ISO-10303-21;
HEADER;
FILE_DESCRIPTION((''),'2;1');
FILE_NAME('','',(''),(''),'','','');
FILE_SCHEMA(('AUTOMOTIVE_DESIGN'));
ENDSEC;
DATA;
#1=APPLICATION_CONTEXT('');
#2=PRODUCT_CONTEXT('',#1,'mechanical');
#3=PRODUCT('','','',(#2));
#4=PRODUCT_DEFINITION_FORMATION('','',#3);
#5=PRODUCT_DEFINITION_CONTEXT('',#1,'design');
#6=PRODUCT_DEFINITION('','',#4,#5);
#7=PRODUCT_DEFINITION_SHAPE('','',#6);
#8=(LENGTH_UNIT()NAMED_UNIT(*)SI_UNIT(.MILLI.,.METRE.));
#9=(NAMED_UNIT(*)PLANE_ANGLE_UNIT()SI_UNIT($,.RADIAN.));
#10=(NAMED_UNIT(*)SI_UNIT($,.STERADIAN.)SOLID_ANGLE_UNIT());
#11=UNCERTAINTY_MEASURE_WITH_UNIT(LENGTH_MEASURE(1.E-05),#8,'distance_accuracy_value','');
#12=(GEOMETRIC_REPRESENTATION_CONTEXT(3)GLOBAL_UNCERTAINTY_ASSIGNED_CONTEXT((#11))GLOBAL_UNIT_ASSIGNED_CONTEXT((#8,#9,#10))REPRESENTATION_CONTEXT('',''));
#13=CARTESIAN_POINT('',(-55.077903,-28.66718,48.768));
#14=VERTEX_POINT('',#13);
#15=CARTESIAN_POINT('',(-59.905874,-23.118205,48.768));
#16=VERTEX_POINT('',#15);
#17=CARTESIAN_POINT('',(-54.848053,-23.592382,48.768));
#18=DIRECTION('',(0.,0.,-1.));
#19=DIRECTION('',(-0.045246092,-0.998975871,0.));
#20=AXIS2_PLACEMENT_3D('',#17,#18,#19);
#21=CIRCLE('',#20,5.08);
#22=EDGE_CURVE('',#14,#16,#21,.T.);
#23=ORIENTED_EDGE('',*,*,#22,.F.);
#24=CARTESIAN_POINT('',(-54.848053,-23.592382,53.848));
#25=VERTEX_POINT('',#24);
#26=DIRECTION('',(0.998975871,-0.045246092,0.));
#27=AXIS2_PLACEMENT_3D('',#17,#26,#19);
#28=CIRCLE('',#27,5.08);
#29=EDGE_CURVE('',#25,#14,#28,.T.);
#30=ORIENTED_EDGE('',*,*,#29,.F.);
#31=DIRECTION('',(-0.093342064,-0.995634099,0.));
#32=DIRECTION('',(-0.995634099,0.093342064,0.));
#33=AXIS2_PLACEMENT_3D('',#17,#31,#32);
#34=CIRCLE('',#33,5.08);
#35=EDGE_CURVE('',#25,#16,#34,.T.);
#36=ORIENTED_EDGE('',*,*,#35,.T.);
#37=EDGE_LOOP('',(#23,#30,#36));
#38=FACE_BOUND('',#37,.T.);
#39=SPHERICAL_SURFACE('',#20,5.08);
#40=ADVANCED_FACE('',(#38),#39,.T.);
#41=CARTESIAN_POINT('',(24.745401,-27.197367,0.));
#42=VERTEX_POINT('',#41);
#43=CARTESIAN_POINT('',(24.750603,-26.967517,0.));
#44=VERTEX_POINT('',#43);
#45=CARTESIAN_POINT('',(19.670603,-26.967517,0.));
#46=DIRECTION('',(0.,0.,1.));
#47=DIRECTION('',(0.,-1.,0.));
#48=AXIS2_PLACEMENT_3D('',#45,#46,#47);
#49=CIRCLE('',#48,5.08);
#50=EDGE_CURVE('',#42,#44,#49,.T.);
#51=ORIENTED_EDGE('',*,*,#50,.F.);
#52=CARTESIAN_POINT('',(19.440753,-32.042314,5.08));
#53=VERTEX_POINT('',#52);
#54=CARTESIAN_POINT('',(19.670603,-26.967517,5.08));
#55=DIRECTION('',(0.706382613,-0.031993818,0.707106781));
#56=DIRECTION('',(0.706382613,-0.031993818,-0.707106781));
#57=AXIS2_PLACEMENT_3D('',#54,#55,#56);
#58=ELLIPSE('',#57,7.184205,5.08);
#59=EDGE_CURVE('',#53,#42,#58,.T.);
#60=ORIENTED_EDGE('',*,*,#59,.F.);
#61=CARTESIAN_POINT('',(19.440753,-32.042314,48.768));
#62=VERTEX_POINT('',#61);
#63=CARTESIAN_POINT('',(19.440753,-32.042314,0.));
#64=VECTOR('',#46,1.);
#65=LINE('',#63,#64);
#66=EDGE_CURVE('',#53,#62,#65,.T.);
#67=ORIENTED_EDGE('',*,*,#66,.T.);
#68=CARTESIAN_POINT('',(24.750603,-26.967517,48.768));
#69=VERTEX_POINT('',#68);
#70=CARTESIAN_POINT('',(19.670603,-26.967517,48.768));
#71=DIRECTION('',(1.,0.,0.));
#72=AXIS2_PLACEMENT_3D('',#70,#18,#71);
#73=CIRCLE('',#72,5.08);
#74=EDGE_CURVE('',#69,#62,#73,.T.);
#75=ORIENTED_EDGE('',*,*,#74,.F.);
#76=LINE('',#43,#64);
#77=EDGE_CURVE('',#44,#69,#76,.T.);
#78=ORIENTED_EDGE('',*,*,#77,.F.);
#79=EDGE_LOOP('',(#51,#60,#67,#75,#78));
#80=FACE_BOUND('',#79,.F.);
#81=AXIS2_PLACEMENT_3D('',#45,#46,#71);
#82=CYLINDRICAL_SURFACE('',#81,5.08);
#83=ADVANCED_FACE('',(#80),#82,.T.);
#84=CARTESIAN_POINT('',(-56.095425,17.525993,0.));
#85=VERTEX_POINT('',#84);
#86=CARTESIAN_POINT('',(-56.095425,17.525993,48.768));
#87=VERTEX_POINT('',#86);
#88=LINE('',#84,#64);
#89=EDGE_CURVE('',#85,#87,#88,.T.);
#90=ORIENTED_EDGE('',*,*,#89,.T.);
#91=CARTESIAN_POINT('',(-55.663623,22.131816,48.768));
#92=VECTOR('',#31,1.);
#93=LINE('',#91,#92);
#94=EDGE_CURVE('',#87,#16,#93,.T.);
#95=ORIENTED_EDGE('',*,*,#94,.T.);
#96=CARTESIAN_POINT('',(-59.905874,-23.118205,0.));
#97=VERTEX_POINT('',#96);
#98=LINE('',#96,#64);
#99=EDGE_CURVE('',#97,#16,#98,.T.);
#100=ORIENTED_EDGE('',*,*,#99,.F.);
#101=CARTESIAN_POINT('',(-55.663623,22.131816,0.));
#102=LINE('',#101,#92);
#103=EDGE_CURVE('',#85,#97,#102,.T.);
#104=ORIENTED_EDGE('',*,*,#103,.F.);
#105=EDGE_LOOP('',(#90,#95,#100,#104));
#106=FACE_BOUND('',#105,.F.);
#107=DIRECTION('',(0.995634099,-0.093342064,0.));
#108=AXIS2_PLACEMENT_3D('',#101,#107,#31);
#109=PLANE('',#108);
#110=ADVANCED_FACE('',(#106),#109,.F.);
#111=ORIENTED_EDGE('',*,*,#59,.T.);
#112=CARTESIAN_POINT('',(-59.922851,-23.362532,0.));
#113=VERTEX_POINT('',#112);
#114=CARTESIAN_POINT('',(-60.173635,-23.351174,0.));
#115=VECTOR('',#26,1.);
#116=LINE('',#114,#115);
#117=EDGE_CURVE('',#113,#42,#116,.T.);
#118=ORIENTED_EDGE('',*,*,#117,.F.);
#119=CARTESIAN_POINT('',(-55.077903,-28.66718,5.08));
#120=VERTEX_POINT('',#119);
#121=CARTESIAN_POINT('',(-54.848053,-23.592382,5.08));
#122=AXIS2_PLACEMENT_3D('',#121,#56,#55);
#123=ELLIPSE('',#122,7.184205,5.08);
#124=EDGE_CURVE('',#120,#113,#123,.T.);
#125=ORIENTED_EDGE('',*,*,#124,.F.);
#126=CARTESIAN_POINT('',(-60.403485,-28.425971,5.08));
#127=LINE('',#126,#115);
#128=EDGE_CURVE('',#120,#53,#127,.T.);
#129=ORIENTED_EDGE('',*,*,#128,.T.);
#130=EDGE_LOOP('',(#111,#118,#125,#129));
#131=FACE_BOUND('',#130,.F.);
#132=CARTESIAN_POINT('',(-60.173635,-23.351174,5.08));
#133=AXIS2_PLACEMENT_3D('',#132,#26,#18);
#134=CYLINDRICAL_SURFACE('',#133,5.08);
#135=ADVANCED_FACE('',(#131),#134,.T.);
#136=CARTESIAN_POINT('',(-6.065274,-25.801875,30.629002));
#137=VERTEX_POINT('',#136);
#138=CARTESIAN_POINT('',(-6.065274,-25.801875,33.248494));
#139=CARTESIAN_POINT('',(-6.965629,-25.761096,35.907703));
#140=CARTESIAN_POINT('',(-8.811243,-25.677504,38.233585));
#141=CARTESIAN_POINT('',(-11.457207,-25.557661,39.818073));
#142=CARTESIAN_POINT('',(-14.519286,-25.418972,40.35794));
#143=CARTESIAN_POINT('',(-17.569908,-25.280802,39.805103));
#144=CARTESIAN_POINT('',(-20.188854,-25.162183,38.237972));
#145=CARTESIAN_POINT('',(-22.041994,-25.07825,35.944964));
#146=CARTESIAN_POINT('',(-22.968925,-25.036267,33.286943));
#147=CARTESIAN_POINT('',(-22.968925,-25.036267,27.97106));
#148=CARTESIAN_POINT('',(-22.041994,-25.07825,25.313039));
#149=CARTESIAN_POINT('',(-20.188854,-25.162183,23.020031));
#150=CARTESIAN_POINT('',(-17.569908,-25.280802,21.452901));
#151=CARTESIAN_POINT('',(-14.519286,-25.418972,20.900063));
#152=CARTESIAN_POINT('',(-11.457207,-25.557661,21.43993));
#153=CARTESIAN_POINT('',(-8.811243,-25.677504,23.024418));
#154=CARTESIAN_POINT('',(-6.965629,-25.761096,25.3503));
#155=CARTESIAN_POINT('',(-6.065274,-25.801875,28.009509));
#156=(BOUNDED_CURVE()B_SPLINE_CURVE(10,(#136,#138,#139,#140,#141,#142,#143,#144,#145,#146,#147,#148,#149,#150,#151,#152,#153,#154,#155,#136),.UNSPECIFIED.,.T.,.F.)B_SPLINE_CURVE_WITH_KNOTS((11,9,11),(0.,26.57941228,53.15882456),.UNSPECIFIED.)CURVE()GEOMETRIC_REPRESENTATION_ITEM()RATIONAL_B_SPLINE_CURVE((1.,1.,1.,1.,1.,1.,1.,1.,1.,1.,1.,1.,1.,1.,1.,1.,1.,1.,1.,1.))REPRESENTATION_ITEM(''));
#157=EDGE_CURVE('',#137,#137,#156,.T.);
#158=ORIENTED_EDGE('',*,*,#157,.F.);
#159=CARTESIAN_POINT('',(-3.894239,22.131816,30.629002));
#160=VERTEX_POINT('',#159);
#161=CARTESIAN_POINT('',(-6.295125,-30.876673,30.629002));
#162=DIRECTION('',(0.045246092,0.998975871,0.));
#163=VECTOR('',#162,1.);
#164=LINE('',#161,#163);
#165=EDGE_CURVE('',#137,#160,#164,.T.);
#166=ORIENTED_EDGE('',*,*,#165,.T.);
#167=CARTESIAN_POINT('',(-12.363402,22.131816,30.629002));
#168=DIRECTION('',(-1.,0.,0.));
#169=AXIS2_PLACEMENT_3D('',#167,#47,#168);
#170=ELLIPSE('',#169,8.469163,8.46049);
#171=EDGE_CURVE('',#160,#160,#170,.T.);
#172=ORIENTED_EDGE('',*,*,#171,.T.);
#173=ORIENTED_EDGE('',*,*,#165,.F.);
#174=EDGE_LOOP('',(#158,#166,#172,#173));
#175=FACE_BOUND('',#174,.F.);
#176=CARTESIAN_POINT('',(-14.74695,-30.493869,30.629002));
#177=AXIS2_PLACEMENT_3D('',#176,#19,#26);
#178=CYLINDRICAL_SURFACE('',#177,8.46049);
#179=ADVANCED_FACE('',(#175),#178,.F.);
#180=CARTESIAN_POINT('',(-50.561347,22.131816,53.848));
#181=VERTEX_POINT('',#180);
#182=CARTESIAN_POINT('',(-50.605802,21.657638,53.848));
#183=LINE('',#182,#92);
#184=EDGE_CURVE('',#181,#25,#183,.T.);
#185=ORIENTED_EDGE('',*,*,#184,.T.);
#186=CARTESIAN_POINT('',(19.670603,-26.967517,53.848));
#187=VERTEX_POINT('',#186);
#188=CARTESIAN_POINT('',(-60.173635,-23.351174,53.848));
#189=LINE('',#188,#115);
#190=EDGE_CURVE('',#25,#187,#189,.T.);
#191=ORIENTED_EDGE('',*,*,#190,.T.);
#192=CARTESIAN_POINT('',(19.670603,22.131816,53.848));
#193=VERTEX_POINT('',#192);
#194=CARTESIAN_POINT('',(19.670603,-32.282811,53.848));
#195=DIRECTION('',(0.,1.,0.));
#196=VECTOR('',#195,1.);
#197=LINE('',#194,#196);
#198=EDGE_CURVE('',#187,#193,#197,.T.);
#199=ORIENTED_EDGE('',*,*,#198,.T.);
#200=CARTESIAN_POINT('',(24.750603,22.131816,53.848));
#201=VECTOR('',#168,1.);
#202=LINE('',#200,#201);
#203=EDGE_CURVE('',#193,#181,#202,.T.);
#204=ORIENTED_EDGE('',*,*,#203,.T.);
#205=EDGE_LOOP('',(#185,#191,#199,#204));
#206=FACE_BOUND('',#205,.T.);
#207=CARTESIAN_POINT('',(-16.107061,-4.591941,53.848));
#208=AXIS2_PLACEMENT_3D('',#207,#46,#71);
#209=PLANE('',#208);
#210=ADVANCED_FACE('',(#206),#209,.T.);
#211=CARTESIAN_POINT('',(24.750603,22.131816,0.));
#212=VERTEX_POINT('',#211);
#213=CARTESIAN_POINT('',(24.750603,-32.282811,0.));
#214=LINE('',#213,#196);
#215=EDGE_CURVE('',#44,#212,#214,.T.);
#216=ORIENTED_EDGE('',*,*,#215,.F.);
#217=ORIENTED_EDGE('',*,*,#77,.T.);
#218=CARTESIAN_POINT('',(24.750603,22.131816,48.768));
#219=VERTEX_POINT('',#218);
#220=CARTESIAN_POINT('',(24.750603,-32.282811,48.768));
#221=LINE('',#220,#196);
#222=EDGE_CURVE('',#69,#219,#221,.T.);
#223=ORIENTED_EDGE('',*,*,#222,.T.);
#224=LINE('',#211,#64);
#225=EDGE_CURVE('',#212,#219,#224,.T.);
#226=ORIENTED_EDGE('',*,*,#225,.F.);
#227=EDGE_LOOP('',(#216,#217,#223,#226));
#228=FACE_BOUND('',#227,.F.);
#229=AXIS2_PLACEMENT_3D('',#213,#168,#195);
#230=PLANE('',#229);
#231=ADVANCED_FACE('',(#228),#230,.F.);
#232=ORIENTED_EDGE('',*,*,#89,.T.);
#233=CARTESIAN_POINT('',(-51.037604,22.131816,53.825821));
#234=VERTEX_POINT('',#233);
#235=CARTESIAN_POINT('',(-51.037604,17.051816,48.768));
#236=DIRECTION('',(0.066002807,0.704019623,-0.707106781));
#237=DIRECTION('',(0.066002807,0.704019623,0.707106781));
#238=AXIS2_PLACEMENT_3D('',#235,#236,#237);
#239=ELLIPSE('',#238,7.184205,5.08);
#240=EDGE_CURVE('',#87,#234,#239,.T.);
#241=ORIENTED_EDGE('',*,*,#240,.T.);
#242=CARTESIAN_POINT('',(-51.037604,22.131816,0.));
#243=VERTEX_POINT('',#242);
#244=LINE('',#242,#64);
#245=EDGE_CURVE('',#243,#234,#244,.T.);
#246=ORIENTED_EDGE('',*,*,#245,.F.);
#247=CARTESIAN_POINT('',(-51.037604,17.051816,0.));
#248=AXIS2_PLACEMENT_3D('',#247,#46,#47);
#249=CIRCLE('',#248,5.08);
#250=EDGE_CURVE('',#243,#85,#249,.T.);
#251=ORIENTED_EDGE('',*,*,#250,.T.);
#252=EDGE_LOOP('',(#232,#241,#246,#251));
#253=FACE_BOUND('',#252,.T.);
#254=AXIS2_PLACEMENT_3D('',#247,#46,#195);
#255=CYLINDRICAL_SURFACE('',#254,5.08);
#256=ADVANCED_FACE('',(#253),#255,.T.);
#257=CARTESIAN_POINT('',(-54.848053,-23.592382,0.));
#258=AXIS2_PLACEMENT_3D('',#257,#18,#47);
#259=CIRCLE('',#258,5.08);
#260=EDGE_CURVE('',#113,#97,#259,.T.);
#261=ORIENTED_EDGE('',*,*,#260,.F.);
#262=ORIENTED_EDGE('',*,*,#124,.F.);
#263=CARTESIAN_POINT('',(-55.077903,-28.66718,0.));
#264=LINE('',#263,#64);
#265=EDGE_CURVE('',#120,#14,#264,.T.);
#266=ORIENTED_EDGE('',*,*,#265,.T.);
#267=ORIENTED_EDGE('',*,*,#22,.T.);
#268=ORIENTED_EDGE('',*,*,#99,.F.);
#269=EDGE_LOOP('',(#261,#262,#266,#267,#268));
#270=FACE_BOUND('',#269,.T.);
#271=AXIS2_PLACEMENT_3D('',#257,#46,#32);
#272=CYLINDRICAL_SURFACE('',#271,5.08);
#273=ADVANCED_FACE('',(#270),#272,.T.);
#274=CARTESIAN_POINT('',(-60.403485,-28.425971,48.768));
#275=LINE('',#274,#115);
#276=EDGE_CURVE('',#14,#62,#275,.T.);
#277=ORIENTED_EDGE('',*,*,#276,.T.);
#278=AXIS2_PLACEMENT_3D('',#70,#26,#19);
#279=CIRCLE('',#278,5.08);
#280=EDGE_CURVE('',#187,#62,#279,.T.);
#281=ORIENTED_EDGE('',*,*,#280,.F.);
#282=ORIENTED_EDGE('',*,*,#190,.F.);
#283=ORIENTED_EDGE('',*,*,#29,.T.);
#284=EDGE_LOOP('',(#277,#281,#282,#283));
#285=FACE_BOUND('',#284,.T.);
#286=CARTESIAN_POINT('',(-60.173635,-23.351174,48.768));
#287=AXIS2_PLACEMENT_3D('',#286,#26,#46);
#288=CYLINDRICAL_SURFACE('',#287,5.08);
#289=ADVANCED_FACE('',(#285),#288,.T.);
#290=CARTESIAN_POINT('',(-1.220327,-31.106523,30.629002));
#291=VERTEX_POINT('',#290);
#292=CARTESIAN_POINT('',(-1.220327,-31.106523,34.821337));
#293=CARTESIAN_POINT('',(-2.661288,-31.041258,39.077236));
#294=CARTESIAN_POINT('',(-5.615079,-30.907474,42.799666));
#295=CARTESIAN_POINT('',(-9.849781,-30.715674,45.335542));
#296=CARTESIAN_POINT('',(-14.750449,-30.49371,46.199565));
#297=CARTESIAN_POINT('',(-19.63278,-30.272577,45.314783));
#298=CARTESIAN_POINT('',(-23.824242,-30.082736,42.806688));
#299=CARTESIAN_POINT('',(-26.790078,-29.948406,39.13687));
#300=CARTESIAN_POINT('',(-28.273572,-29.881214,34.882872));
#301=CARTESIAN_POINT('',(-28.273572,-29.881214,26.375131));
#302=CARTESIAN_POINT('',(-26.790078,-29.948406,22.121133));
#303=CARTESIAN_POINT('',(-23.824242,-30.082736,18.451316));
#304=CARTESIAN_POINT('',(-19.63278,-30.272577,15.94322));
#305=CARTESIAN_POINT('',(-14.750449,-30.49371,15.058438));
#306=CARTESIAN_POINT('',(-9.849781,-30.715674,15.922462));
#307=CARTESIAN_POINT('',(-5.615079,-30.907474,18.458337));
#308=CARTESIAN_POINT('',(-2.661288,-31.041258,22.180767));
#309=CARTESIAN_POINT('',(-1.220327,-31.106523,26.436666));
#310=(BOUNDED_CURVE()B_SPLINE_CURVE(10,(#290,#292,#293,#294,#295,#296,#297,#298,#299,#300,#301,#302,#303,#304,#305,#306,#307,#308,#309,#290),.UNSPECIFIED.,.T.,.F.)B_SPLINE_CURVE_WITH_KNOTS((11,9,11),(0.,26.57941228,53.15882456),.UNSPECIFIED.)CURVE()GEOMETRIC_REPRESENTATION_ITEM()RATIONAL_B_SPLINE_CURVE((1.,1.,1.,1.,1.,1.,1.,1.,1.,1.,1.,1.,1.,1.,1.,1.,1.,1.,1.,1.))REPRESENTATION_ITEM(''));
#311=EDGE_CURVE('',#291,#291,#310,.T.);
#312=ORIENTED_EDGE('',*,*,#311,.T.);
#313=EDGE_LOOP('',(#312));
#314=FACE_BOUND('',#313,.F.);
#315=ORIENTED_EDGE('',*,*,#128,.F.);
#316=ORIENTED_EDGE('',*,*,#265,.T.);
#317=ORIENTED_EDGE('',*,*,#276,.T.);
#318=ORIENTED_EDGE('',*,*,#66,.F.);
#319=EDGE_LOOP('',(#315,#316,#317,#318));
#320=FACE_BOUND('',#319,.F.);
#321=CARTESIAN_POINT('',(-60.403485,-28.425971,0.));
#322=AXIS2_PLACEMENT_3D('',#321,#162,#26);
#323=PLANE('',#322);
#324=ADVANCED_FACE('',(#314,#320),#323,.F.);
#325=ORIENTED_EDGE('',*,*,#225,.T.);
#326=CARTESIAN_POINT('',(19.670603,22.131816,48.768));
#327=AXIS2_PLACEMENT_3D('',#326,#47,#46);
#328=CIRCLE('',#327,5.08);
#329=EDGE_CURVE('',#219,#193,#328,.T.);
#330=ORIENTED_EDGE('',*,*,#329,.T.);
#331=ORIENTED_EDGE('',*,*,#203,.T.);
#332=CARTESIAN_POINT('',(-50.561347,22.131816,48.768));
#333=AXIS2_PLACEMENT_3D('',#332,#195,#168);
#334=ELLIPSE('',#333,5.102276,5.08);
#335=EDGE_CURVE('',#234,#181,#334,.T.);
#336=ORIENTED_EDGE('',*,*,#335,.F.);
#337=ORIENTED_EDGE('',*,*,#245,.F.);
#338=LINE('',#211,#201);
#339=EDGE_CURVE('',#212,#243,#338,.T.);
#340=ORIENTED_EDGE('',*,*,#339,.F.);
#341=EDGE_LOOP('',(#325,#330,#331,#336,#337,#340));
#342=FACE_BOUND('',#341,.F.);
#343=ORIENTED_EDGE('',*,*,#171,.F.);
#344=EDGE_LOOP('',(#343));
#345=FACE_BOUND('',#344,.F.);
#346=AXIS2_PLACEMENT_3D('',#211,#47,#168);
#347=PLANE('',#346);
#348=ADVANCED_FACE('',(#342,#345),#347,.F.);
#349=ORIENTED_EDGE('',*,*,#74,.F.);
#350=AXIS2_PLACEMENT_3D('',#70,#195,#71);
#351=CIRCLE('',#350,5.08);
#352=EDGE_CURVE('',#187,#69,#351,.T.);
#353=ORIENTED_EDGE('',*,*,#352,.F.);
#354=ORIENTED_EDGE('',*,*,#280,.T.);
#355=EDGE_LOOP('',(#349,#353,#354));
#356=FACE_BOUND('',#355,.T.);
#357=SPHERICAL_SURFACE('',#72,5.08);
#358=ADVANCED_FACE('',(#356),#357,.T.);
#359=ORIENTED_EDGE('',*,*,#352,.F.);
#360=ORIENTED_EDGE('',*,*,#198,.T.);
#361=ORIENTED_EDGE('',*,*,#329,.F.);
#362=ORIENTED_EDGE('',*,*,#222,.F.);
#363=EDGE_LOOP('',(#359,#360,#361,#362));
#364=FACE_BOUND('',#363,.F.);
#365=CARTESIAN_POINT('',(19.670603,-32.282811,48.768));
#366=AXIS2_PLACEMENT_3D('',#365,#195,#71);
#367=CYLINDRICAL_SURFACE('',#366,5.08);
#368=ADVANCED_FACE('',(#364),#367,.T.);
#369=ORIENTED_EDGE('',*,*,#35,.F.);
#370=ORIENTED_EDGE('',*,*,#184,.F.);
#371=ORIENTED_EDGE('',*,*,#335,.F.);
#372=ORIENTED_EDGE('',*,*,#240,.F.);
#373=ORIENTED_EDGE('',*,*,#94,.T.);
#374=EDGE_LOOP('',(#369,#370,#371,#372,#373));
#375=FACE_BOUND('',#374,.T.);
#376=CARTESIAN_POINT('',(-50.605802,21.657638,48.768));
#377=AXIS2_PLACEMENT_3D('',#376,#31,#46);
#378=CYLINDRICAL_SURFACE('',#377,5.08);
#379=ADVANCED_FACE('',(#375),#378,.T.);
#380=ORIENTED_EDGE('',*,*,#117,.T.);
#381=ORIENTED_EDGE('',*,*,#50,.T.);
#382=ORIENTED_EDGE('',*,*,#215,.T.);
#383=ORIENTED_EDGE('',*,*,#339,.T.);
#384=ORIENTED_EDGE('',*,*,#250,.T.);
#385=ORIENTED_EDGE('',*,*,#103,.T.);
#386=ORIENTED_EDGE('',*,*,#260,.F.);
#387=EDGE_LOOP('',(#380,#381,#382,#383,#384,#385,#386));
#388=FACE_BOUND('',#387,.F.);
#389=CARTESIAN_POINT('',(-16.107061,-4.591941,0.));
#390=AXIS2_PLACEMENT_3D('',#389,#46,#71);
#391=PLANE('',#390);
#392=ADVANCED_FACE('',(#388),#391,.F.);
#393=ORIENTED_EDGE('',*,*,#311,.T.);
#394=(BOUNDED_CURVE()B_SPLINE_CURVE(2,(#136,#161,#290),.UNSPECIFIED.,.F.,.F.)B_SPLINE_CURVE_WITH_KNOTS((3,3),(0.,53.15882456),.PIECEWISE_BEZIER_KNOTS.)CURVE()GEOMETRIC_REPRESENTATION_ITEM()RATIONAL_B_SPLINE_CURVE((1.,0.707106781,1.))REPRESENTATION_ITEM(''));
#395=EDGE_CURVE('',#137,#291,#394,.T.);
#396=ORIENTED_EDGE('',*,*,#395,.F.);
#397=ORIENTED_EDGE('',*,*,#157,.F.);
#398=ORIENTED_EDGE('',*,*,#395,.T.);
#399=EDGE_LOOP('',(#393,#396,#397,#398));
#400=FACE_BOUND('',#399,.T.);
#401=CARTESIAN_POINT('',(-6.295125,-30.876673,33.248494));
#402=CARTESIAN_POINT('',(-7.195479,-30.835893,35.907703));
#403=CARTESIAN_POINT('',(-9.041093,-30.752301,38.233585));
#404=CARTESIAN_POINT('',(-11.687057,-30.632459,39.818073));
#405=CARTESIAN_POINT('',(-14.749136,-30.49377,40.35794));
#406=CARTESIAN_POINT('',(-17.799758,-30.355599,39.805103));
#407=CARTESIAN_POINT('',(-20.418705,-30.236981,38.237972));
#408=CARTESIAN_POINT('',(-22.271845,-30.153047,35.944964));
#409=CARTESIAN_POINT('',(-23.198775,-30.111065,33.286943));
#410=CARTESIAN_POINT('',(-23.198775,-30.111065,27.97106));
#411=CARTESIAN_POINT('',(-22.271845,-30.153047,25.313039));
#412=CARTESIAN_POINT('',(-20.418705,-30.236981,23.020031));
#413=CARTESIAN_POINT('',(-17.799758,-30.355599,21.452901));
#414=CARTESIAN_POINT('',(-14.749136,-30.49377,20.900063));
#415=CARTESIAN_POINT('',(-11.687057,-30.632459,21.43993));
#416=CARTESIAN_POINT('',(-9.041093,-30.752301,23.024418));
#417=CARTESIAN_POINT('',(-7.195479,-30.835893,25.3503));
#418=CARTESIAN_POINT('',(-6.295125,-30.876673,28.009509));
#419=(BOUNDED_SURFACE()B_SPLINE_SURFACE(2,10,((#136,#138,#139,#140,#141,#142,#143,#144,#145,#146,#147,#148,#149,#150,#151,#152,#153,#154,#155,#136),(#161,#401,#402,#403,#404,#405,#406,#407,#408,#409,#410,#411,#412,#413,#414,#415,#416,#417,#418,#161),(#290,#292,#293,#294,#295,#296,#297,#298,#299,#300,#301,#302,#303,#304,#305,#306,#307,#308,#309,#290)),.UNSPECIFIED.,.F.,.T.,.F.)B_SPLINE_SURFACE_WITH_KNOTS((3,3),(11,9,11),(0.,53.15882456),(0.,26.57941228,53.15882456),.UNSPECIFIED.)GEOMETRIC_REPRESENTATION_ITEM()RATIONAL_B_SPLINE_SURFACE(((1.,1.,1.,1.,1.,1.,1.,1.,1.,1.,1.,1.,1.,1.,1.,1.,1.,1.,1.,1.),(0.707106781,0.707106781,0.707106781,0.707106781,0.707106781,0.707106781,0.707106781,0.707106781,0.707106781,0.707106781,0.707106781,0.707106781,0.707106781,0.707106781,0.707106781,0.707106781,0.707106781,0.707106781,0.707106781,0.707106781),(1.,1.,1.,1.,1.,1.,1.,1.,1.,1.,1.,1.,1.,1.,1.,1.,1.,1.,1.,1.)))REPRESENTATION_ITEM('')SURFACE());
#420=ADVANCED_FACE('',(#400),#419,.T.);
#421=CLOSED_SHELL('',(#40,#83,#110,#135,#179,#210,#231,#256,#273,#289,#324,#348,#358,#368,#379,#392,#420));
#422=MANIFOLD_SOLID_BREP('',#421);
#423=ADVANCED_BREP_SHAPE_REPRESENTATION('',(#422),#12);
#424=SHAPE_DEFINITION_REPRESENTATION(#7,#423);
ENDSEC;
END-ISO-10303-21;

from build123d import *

# Parameters (mm, degrees)
F1_DEPTH = 53.848
F2_R     = 8.4604896976
F3_DEPTH = 64.262
F4_R     = 5.08


with BuildPart() as f1:
    # F0 (on Top) → F1 (new body)
    with BuildSketch(Plane.XY):
        Polygon((24.7506033629, 22.1318155527), (-55.6636229157, 22.1318155527), (-60.4034848511, -28.4259710461), (24.7506033629, -32.2828106582), align=None)
    extrude(amount=F1_DEPTH)

    # F2 (on face) → F3 (cut)
    with BuildSketch(Plane(origin=(-1.4085054524, -31.0979998146, 0), x_dir=(0.9989758712, -0.045246092, 0), z_dir=(-0.045246092, -0.9989758712, 0))):
        with Locations((-13.3521184325, 30.6290015578)):
            Circle(F2_R)
    extrude(amount=-F3_DEPTH, mode=Mode.SUBTRACT)

    # F4
    f4_edges = [f1.edges().sort_by_distance(p)[0] for p in [
        (-60.403485, -28.425971, 26.924),
        (-17.826441, -30.354391, 0),
        (-17.826441, -30.354391, 53.848),
        (24.750603, -32.282811, 26.924),
        (-23.198775, -30.111065, 30.629002),
        (-58.033554, -3.147078, 53.848),
        (-55.663623, 22.131816, 26.924),
        (24.750603, -5.075498, 53.848),
    ]]
    fillet(f4_edges, radius=F4_R)


solid = f1.part
